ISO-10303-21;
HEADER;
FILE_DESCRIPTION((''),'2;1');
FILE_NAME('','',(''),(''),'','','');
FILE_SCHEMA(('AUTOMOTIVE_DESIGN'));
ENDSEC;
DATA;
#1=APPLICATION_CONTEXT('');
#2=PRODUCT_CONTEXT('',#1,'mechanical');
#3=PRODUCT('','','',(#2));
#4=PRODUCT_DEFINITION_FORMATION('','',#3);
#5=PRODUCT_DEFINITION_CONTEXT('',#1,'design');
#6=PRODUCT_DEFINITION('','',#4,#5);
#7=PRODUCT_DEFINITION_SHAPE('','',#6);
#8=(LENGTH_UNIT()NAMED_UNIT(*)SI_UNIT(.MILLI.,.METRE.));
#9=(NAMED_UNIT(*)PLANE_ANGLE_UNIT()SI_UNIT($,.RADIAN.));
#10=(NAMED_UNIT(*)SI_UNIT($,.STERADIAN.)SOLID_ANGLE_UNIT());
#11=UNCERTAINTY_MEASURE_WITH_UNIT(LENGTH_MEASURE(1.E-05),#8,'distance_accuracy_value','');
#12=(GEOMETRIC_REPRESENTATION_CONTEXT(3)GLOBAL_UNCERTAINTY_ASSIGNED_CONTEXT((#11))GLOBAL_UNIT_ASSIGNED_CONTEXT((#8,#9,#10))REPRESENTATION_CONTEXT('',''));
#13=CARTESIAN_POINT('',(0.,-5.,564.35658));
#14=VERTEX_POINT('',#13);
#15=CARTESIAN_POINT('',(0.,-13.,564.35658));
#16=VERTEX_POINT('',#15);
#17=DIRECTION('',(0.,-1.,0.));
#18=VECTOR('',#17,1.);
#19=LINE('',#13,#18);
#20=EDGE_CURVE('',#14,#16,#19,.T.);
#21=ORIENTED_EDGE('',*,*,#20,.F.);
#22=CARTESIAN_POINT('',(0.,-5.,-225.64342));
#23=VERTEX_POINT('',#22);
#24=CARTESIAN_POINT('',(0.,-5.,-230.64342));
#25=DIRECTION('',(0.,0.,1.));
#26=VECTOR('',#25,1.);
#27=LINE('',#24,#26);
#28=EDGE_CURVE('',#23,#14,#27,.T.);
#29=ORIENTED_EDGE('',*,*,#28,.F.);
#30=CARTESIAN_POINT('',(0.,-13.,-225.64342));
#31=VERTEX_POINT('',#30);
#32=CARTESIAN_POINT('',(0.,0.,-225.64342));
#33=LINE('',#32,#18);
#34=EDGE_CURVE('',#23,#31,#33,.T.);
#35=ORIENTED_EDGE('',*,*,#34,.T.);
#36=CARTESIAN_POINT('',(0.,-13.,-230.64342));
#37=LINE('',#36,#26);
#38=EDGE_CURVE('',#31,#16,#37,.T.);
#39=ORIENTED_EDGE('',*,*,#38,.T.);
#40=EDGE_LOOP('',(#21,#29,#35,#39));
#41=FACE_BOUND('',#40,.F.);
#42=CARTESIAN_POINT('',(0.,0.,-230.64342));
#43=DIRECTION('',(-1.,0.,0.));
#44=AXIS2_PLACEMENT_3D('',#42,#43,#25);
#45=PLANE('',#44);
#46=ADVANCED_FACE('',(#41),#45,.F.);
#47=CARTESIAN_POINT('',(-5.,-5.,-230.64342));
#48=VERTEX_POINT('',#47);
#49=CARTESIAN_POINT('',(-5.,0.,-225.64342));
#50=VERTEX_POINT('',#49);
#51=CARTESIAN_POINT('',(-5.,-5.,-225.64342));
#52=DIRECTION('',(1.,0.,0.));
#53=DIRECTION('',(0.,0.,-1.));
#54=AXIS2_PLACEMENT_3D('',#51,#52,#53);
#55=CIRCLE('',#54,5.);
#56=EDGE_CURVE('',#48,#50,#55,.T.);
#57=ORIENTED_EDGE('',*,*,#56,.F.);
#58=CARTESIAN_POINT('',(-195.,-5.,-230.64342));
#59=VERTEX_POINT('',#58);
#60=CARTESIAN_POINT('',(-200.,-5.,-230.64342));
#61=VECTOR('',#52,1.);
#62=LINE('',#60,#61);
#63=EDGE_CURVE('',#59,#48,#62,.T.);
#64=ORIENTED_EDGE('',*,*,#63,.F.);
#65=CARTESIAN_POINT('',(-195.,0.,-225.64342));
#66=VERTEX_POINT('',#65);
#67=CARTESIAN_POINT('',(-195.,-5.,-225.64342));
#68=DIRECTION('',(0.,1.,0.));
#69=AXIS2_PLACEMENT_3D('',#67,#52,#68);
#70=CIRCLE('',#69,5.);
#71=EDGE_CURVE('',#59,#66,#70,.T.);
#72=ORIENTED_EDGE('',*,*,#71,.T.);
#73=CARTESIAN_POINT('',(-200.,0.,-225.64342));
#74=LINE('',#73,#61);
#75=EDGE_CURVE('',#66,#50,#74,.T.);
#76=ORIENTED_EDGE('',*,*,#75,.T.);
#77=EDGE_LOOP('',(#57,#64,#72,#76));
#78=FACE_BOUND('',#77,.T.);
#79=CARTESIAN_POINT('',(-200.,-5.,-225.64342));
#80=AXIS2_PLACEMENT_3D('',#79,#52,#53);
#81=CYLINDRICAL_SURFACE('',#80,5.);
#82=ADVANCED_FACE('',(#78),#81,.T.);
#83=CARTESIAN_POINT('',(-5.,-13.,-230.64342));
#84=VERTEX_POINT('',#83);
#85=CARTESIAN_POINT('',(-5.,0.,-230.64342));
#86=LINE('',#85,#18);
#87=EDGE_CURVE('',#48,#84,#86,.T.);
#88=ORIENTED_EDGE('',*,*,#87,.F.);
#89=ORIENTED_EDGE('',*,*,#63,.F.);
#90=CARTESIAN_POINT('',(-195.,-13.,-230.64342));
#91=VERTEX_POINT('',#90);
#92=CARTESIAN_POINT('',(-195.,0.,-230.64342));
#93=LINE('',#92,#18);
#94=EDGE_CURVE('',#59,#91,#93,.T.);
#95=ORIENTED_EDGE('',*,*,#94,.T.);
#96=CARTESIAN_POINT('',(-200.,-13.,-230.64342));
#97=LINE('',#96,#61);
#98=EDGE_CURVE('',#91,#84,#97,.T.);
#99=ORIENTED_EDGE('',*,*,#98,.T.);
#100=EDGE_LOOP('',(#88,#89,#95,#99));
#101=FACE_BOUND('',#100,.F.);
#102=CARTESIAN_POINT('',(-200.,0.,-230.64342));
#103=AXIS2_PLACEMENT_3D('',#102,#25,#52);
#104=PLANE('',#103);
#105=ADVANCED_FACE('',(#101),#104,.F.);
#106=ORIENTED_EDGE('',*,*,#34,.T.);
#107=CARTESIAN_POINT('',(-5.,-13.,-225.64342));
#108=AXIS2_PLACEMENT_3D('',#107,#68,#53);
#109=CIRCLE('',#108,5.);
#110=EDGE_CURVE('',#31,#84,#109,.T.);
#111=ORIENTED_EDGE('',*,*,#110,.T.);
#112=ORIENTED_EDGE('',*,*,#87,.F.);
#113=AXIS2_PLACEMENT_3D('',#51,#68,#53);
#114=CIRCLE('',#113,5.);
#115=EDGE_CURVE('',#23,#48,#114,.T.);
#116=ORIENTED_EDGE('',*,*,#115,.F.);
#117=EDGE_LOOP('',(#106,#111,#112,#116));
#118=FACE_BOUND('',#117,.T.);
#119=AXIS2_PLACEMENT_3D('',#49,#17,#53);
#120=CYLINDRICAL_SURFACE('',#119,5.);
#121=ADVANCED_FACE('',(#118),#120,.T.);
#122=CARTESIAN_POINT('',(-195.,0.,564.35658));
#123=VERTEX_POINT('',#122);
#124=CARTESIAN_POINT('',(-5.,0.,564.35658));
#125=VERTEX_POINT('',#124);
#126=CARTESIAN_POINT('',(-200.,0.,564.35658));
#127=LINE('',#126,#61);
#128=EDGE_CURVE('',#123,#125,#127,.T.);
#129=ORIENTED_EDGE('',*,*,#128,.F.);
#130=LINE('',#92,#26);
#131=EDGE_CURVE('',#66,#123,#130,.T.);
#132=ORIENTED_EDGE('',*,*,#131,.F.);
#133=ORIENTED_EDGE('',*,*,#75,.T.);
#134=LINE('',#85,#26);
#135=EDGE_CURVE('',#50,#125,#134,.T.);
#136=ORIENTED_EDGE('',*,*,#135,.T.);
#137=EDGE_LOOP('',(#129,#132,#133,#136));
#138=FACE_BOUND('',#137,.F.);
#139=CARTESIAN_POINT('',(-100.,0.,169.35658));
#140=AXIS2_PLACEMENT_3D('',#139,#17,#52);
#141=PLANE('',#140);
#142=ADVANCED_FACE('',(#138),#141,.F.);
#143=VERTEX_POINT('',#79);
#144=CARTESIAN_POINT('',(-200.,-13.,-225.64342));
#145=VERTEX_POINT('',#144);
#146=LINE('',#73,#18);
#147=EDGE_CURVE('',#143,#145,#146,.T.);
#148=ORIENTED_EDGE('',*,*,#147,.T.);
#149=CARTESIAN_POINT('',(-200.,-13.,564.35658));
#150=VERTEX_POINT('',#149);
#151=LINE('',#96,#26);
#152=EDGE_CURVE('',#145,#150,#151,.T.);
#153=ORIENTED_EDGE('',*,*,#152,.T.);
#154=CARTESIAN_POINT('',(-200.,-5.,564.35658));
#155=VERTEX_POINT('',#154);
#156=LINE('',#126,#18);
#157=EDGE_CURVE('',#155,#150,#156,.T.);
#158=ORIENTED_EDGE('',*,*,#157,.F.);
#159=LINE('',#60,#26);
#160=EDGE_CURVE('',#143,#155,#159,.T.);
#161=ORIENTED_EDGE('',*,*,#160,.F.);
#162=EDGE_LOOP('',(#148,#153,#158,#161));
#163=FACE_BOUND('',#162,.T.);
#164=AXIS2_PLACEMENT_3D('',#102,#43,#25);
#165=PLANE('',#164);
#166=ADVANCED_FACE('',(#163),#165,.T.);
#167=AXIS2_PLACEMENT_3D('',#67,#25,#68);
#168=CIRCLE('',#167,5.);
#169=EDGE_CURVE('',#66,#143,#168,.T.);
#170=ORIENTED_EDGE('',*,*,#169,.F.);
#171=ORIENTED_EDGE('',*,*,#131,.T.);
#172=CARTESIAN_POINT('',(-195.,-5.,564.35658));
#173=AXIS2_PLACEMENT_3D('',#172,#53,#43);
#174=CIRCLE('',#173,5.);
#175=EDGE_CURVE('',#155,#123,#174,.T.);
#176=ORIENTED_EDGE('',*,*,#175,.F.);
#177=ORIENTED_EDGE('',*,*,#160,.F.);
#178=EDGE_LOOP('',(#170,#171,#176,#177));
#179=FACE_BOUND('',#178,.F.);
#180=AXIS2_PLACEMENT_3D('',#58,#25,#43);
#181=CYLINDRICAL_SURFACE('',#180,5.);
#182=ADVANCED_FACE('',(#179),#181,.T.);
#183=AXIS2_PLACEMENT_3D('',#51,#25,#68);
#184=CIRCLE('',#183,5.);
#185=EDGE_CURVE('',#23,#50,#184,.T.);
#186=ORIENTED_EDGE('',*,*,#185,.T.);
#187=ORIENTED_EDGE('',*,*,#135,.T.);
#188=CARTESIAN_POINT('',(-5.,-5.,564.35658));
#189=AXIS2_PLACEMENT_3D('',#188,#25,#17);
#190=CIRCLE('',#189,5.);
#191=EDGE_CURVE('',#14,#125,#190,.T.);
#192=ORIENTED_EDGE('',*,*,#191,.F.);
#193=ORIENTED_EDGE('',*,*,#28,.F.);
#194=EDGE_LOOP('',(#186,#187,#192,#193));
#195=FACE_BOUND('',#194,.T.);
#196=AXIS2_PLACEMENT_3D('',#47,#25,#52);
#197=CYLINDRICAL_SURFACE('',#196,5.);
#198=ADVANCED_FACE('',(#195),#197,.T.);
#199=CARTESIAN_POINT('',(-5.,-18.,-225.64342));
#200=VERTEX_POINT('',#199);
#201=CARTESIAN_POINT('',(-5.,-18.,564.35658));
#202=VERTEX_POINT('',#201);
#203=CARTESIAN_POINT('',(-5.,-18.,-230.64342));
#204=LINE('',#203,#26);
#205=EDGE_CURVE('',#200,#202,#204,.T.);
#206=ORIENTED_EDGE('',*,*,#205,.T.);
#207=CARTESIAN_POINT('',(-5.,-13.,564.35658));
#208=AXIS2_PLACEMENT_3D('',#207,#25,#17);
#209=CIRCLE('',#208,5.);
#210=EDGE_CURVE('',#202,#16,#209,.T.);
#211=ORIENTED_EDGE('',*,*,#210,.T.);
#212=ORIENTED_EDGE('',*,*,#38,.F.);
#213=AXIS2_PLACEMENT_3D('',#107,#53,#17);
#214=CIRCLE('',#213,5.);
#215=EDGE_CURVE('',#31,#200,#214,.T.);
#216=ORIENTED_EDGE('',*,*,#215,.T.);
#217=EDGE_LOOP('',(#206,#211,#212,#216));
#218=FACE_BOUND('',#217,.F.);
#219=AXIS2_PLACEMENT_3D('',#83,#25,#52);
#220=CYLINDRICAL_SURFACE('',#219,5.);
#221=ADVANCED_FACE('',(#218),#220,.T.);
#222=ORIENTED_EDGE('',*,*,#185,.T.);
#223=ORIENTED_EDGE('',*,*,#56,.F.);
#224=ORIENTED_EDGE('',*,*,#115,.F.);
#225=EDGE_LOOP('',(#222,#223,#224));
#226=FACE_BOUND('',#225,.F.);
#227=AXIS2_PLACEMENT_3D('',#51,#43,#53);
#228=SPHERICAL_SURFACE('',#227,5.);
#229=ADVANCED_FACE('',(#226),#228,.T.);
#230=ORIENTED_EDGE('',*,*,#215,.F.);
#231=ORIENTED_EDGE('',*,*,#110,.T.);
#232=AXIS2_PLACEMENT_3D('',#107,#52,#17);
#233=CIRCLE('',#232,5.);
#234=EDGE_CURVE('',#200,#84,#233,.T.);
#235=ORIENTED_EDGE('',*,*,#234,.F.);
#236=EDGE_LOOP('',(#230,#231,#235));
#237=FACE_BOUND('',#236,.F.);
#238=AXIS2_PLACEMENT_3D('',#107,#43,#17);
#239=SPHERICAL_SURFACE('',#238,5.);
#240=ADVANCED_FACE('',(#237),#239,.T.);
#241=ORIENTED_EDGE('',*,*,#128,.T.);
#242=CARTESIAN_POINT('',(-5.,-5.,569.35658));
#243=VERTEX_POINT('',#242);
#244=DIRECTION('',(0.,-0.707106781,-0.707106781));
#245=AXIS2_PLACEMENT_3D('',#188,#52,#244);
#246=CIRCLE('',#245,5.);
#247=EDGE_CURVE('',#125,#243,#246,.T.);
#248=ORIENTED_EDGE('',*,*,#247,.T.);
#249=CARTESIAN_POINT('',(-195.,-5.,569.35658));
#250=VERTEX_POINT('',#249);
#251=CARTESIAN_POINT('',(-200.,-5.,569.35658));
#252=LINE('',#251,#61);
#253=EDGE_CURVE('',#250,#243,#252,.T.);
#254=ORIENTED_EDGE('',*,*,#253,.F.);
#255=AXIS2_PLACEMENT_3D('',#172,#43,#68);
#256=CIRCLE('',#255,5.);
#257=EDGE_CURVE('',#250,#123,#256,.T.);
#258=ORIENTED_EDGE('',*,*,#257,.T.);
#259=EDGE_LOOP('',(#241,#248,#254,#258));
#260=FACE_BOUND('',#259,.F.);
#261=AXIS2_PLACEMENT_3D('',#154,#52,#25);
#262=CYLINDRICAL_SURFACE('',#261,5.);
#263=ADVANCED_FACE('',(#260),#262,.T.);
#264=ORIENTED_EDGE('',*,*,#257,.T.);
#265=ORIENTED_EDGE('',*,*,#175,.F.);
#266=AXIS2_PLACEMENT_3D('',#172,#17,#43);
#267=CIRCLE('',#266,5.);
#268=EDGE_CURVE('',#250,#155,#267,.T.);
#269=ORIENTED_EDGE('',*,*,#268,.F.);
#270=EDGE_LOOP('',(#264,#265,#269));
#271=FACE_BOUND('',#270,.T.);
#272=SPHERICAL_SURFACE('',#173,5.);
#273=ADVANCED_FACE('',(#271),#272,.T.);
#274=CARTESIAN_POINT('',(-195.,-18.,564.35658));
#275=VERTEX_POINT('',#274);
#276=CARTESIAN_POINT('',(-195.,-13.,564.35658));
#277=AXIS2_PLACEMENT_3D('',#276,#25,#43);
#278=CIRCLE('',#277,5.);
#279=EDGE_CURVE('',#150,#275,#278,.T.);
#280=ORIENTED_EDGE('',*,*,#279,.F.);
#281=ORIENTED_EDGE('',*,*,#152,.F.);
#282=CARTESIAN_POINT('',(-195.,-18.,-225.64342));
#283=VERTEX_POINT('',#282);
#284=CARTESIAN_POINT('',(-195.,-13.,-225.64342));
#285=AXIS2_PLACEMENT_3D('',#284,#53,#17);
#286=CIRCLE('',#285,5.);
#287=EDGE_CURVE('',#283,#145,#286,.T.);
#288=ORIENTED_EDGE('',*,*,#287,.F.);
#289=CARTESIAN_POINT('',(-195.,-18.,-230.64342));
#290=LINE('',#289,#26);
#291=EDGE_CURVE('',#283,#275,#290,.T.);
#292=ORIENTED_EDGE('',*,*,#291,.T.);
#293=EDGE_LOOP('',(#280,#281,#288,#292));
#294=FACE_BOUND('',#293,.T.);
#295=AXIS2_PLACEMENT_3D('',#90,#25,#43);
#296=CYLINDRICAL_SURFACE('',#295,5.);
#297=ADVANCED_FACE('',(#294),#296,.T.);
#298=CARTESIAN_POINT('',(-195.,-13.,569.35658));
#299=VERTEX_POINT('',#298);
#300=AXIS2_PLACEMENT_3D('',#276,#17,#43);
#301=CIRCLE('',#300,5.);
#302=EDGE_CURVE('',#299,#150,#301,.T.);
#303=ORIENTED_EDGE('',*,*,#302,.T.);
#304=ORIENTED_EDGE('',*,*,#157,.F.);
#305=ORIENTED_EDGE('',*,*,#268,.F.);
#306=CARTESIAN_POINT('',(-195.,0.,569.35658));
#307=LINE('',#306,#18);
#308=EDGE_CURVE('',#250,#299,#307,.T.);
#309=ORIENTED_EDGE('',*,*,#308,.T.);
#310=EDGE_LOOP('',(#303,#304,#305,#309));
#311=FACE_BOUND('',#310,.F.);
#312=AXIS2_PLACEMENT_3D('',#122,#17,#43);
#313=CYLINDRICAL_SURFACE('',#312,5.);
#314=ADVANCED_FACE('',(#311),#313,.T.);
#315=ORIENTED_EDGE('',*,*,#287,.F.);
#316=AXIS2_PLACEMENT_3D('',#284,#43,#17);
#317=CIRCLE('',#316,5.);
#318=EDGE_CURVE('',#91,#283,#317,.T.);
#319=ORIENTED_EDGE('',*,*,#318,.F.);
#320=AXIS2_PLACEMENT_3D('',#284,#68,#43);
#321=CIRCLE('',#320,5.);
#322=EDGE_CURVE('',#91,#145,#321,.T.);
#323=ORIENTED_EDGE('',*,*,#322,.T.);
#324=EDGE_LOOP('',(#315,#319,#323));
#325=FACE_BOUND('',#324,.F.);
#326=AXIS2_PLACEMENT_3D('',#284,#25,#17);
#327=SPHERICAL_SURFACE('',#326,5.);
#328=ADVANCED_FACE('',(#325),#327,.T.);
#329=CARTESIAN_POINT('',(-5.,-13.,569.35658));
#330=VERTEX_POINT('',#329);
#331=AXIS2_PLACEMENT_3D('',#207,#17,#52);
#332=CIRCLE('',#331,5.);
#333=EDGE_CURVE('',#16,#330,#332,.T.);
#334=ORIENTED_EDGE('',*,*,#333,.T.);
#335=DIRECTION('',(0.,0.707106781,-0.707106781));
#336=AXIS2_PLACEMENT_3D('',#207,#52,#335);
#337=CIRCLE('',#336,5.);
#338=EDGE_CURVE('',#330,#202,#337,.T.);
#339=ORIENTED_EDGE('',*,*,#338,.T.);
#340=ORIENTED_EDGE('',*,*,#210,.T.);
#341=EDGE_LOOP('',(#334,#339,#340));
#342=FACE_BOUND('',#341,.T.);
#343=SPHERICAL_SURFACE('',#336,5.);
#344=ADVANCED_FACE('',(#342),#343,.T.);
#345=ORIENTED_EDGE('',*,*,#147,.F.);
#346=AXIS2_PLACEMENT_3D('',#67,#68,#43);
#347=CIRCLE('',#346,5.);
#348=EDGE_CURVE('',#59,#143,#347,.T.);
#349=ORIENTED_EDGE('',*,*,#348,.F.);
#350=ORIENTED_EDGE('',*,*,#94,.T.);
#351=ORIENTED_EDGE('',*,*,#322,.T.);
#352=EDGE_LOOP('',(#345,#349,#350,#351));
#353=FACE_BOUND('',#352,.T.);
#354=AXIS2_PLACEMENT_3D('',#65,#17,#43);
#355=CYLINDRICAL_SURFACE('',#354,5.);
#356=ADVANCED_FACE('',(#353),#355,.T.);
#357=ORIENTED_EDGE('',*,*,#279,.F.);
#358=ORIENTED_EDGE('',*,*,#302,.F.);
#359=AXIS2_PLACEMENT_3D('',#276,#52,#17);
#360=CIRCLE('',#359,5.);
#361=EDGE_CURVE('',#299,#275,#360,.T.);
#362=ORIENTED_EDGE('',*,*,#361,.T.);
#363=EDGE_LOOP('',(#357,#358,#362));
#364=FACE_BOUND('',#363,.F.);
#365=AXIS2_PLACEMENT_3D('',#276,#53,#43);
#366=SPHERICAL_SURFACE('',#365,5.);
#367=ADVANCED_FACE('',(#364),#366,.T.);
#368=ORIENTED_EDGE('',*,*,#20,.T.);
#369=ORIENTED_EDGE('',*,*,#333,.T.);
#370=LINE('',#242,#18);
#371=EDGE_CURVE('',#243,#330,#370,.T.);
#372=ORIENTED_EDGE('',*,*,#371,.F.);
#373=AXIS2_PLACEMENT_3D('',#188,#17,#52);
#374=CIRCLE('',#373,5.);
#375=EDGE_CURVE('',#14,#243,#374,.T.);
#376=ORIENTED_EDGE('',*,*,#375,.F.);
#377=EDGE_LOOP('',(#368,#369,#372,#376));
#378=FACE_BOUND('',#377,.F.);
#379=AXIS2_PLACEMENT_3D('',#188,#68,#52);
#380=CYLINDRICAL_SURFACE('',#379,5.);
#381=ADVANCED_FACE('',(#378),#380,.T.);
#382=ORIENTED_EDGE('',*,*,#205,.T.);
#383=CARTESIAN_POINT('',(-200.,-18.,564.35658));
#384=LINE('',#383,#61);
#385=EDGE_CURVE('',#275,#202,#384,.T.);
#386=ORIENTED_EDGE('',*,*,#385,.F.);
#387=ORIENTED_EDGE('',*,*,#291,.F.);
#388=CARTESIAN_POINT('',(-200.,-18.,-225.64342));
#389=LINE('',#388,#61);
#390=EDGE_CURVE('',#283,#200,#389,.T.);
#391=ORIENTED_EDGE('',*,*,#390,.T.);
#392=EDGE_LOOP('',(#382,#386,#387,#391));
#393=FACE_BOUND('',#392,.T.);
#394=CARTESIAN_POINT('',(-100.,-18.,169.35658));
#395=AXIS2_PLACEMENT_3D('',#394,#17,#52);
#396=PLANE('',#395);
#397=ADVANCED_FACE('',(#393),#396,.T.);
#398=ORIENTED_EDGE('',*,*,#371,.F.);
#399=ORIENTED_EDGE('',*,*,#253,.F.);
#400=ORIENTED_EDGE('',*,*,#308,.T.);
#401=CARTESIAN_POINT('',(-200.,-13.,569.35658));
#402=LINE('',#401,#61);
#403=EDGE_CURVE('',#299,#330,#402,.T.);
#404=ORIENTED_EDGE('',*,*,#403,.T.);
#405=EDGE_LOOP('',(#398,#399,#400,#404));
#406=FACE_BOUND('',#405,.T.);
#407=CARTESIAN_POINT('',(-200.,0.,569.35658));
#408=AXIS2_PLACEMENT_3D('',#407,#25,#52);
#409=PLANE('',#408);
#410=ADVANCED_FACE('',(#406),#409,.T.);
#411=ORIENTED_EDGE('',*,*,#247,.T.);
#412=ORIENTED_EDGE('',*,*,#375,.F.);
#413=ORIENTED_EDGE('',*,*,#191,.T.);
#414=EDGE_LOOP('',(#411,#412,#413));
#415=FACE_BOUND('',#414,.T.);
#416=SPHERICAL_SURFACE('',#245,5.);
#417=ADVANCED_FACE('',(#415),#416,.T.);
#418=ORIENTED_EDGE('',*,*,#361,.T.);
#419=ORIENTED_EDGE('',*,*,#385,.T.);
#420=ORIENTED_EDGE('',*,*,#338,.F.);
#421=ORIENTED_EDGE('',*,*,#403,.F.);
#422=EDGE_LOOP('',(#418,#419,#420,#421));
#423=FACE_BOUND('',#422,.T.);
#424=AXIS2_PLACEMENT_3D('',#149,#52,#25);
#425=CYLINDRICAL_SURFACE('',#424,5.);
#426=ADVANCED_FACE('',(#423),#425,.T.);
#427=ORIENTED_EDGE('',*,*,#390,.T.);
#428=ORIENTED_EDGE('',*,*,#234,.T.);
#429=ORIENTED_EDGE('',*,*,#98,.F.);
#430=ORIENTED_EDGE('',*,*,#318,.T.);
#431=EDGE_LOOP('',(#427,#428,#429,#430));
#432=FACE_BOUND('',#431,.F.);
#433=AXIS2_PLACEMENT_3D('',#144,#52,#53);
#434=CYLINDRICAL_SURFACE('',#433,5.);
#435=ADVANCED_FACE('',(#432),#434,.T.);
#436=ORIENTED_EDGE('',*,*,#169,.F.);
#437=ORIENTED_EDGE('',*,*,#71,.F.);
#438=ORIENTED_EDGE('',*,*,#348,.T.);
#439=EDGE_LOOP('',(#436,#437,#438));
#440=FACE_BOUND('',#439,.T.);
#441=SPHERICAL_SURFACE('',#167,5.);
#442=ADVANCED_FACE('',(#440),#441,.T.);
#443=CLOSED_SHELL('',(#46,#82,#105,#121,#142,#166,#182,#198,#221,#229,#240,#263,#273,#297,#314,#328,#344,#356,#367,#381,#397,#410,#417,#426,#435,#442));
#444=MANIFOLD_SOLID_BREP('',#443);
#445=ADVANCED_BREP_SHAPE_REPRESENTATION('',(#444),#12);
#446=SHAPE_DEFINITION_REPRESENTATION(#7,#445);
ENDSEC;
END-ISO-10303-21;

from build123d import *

# Parameters (mm, degrees)
F0_W         = 200
F0_H         = 800
F1_DEPTH     = 18
F2_R         = 5
F3_T1_DEPTH  = 8
F3_S5_W      = 5
F3_S5_H      = 5
F3_T6_DEPTH  = 5
F3_S11_W     = 5
F3_S11_H     = 5
F3_T12_DEPTH = 5


# Not quite as in the source:
# - a fillet or chamfer that OpenCascade refuses, or shapes differently, is made with other operations: its cross-section is extruded or revolved along the edge and cut away or added


with BuildPart() as f1:
    # F0 (on Front) → F1 (new body)
    with BuildSketch(Plane.XZ):
        with Locations((-100, 169.3565798058)):
            Rectangle(F0_W, F0_H)
    extrude(amount=F1_DEPTH)

    # F2
    f2_edges = [f1.edges().sort_by_distance(p)[0] for p in [
        (-200, -18, 169.35658),
        (-200, 0, 169.35658),
        (-100, -18, -230.64342),
        (-100, 0, -230.64342),
        (0, -18, 169.35658),
        (-200, -9, -230.64342),
        (0, -9, -230.64342),
        (-200, -9, 569.35658),
        (-100, -18, 569.35658),
        (-100, 0, 569.35658),
        (0, 0, 169.35658),
    ]]
    fillet(f2_edges, radius=F2_R)

    # F3: fillet of radius 5 on 1 edges, made by hand

    # F3_s2 → F3_t1 (cut)
    with BuildSketch(Plane.XZ.offset(5)):
        with BuildLine():
            ThreePointArc((0, 564.3565798058), (-1.4644660941, 567.8921137117), (-5, 569.3565798058))
            Line((-5, 569.3565798058), (0, 569.3565798058))
            Line((0, 569.3565798058), (0, 564.3565798058))
        make_face()
    extrude(amount=F3_T1_DEPTH, mode=Mode.SUBTRACT)


with BuildPart() as f3_tool4:
    # F3_s5 → F3_t6 (new body)
    with BuildSketch(Plane.YZ.offset(-5)):
        with Locations((-2.5, 566.8565798058)):
            Rectangle(F3_S5_W, F3_S5_H)
    extrude(amount=F3_T6_DEPTH)

    # F3_s7 → F3_t8 (revolve, cut)
    with BuildSketch(Plane(origin=(-5, -5, 564.3565798058), x_dir=(0, -0.7071067812, -0.7071067812), z_dir=(0, -0.7071067812, 0.7071067812))):
        with BuildLine():
            ThreePointArc((0, -5), (5, 0), (0, 5))
            Line((0, 5), (0, -5))
        make_face()
    revolve(axis=Axis((-5, -5, 564.3565798058), (1, 0, 0)), mode=Mode.SUBTRACT)


with BuildPart() as f1_1:
    add(f1.part)

    # F3_t3: cut F3_tool4
    add(f3_tool4.part, mode=Mode.SUBTRACT)


with BuildPart() as f3_tool10:
    # F3_s11 → F3_t12 (new body)
    with BuildSketch(Plane.YZ.offset(-5)):
        with Locations((-15.5, 566.8565798058)):
            Rectangle(F3_S11_W, F3_S11_H)
    extrude(amount=F3_T12_DEPTH)

    # F3_s13 → F3_t14 (revolve, cut)
    with BuildSketch(Plane(origin=(-5, -13, 564.3565798058), x_dir=(0, 0.7071067812, -0.7071067812), z_dir=(0, -0.7071067812, -0.7071067812))):
        with BuildLine():
            ThreePointArc((0, -5), (5, 0), (0, 5))
            Line((0, 5), (0, -5))
        make_face()
    revolve(axis=Axis((-5, -13, 564.3565798058), (1, 0, 0)), mode=Mode.SUBTRACT)


with BuildPart() as f1_2:
    add(f1_1.part)

    # F3_t9: cut F3_tool10
    add(f3_tool10.part, mode=Mode.SUBTRACT)


solid = f1_2.part
